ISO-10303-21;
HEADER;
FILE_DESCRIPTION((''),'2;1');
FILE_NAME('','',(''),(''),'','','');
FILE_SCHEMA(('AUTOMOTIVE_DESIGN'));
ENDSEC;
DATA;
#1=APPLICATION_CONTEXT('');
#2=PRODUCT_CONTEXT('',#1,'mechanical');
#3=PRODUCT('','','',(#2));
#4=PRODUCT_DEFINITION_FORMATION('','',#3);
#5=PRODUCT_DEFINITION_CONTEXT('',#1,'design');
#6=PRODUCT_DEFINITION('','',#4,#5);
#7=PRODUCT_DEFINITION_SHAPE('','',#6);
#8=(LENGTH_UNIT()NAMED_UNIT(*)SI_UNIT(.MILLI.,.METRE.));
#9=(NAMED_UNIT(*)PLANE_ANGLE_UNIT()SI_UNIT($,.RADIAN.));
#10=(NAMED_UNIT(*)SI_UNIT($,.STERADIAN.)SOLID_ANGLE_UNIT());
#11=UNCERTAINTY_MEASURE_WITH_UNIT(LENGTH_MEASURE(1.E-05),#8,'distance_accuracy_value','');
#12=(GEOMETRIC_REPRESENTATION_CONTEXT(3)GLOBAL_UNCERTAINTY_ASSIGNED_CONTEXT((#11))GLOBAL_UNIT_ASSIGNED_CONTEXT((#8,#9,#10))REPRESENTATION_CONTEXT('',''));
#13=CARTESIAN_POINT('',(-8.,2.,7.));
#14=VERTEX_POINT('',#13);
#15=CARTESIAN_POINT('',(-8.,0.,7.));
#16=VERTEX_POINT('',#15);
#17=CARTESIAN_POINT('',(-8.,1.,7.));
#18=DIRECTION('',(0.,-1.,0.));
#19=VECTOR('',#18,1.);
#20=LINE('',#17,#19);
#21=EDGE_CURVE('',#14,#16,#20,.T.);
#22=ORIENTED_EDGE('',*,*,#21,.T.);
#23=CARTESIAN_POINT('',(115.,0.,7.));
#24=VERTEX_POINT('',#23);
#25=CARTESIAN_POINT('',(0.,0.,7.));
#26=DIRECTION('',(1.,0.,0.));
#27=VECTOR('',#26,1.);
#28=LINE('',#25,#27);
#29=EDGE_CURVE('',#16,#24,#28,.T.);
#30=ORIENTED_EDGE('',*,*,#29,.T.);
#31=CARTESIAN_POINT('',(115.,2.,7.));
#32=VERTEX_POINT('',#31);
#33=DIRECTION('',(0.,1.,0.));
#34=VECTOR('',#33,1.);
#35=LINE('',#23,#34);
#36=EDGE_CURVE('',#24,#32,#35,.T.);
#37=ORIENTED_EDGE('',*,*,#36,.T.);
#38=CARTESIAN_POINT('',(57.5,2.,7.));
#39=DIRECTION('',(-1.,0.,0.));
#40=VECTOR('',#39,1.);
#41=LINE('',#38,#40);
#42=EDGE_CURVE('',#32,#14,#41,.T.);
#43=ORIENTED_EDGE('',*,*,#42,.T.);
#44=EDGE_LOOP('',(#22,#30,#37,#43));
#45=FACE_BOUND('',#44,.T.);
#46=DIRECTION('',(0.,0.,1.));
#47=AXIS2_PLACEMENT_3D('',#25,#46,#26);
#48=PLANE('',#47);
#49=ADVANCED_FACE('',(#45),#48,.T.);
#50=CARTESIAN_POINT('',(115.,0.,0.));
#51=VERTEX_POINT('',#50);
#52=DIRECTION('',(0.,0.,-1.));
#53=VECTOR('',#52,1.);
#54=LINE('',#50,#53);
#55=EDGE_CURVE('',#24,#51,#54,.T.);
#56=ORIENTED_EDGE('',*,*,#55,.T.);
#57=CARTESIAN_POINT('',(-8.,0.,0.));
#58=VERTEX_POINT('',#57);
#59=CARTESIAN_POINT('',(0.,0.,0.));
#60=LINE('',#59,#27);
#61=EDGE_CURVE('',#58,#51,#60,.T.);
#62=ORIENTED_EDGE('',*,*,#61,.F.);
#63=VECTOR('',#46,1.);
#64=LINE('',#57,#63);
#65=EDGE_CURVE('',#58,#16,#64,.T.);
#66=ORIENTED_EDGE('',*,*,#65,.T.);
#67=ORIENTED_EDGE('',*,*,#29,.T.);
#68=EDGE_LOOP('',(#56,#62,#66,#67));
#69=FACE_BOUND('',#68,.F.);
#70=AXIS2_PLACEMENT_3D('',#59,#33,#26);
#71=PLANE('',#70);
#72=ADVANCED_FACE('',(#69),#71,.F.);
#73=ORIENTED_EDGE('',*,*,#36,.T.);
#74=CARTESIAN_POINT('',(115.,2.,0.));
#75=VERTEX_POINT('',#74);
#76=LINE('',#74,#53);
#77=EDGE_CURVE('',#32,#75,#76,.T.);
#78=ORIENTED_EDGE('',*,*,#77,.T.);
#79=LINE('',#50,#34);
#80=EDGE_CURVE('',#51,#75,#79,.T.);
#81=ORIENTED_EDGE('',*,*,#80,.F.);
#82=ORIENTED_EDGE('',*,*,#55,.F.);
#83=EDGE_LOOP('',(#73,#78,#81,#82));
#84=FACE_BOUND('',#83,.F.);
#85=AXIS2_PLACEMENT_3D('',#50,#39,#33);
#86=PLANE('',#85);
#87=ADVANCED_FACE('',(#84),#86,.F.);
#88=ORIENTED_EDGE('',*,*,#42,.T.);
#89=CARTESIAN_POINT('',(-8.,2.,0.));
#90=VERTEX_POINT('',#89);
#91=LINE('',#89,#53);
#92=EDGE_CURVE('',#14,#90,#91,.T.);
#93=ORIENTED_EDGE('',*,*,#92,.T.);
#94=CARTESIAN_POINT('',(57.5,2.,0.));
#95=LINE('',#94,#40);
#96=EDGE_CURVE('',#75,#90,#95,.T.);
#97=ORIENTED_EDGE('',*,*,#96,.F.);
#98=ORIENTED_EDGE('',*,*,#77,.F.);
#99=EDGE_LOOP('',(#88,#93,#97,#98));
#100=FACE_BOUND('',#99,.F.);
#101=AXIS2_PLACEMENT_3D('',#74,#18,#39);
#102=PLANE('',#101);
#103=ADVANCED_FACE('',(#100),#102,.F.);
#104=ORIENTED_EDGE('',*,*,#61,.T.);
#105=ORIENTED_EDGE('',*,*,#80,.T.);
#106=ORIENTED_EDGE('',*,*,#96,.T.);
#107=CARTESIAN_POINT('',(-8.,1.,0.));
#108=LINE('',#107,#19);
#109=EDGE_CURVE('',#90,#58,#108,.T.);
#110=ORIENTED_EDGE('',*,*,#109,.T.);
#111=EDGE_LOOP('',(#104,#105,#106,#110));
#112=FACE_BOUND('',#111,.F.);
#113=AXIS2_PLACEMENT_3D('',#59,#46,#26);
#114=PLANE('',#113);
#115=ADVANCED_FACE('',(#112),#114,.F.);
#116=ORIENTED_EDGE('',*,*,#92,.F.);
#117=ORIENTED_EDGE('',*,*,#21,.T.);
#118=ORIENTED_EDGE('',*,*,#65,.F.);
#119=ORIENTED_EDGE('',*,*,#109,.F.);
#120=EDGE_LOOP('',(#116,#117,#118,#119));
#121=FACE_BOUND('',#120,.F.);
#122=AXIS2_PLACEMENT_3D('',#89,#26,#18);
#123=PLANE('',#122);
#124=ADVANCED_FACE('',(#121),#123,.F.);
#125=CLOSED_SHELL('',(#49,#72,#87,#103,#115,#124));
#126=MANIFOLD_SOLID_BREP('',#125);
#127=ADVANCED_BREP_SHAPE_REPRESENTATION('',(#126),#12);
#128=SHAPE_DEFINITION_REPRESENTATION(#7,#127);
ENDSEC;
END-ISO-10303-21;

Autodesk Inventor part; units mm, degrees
ref_plane "YZ Plane" through (0, 0, 0) normal (1, 0, 0) x (0, 1, 0)
ref_plane "XZ Plane" through (0, 0, 0) normal (0, 1, 0) x (-1, 0, 0)
ref_plane "XY Plane" through (0, 0, 0) normal (0, 0, 1) x (1, 0, 0)
sketch "草图1" plane through (0, 0, 0) normal (0, 0, 1) x (1, 0, 0)
  line L0 (0, 0) -> (115, 0)
  line L1 (115, 0) -> (115, 2)
  line L2 (115, 2) -> (0, 2)
  line L3 (0, 2) -> (0, 0)
  dimension "d0" = 2
  dimension "d4" = 115
extrude "拉伸1" add sketch "草图1" along normal blind 7
move faces "移动1" translate (-8, 0, 0) faces at (0, 1.3333, 2.3333)
properties part number "皮带"
